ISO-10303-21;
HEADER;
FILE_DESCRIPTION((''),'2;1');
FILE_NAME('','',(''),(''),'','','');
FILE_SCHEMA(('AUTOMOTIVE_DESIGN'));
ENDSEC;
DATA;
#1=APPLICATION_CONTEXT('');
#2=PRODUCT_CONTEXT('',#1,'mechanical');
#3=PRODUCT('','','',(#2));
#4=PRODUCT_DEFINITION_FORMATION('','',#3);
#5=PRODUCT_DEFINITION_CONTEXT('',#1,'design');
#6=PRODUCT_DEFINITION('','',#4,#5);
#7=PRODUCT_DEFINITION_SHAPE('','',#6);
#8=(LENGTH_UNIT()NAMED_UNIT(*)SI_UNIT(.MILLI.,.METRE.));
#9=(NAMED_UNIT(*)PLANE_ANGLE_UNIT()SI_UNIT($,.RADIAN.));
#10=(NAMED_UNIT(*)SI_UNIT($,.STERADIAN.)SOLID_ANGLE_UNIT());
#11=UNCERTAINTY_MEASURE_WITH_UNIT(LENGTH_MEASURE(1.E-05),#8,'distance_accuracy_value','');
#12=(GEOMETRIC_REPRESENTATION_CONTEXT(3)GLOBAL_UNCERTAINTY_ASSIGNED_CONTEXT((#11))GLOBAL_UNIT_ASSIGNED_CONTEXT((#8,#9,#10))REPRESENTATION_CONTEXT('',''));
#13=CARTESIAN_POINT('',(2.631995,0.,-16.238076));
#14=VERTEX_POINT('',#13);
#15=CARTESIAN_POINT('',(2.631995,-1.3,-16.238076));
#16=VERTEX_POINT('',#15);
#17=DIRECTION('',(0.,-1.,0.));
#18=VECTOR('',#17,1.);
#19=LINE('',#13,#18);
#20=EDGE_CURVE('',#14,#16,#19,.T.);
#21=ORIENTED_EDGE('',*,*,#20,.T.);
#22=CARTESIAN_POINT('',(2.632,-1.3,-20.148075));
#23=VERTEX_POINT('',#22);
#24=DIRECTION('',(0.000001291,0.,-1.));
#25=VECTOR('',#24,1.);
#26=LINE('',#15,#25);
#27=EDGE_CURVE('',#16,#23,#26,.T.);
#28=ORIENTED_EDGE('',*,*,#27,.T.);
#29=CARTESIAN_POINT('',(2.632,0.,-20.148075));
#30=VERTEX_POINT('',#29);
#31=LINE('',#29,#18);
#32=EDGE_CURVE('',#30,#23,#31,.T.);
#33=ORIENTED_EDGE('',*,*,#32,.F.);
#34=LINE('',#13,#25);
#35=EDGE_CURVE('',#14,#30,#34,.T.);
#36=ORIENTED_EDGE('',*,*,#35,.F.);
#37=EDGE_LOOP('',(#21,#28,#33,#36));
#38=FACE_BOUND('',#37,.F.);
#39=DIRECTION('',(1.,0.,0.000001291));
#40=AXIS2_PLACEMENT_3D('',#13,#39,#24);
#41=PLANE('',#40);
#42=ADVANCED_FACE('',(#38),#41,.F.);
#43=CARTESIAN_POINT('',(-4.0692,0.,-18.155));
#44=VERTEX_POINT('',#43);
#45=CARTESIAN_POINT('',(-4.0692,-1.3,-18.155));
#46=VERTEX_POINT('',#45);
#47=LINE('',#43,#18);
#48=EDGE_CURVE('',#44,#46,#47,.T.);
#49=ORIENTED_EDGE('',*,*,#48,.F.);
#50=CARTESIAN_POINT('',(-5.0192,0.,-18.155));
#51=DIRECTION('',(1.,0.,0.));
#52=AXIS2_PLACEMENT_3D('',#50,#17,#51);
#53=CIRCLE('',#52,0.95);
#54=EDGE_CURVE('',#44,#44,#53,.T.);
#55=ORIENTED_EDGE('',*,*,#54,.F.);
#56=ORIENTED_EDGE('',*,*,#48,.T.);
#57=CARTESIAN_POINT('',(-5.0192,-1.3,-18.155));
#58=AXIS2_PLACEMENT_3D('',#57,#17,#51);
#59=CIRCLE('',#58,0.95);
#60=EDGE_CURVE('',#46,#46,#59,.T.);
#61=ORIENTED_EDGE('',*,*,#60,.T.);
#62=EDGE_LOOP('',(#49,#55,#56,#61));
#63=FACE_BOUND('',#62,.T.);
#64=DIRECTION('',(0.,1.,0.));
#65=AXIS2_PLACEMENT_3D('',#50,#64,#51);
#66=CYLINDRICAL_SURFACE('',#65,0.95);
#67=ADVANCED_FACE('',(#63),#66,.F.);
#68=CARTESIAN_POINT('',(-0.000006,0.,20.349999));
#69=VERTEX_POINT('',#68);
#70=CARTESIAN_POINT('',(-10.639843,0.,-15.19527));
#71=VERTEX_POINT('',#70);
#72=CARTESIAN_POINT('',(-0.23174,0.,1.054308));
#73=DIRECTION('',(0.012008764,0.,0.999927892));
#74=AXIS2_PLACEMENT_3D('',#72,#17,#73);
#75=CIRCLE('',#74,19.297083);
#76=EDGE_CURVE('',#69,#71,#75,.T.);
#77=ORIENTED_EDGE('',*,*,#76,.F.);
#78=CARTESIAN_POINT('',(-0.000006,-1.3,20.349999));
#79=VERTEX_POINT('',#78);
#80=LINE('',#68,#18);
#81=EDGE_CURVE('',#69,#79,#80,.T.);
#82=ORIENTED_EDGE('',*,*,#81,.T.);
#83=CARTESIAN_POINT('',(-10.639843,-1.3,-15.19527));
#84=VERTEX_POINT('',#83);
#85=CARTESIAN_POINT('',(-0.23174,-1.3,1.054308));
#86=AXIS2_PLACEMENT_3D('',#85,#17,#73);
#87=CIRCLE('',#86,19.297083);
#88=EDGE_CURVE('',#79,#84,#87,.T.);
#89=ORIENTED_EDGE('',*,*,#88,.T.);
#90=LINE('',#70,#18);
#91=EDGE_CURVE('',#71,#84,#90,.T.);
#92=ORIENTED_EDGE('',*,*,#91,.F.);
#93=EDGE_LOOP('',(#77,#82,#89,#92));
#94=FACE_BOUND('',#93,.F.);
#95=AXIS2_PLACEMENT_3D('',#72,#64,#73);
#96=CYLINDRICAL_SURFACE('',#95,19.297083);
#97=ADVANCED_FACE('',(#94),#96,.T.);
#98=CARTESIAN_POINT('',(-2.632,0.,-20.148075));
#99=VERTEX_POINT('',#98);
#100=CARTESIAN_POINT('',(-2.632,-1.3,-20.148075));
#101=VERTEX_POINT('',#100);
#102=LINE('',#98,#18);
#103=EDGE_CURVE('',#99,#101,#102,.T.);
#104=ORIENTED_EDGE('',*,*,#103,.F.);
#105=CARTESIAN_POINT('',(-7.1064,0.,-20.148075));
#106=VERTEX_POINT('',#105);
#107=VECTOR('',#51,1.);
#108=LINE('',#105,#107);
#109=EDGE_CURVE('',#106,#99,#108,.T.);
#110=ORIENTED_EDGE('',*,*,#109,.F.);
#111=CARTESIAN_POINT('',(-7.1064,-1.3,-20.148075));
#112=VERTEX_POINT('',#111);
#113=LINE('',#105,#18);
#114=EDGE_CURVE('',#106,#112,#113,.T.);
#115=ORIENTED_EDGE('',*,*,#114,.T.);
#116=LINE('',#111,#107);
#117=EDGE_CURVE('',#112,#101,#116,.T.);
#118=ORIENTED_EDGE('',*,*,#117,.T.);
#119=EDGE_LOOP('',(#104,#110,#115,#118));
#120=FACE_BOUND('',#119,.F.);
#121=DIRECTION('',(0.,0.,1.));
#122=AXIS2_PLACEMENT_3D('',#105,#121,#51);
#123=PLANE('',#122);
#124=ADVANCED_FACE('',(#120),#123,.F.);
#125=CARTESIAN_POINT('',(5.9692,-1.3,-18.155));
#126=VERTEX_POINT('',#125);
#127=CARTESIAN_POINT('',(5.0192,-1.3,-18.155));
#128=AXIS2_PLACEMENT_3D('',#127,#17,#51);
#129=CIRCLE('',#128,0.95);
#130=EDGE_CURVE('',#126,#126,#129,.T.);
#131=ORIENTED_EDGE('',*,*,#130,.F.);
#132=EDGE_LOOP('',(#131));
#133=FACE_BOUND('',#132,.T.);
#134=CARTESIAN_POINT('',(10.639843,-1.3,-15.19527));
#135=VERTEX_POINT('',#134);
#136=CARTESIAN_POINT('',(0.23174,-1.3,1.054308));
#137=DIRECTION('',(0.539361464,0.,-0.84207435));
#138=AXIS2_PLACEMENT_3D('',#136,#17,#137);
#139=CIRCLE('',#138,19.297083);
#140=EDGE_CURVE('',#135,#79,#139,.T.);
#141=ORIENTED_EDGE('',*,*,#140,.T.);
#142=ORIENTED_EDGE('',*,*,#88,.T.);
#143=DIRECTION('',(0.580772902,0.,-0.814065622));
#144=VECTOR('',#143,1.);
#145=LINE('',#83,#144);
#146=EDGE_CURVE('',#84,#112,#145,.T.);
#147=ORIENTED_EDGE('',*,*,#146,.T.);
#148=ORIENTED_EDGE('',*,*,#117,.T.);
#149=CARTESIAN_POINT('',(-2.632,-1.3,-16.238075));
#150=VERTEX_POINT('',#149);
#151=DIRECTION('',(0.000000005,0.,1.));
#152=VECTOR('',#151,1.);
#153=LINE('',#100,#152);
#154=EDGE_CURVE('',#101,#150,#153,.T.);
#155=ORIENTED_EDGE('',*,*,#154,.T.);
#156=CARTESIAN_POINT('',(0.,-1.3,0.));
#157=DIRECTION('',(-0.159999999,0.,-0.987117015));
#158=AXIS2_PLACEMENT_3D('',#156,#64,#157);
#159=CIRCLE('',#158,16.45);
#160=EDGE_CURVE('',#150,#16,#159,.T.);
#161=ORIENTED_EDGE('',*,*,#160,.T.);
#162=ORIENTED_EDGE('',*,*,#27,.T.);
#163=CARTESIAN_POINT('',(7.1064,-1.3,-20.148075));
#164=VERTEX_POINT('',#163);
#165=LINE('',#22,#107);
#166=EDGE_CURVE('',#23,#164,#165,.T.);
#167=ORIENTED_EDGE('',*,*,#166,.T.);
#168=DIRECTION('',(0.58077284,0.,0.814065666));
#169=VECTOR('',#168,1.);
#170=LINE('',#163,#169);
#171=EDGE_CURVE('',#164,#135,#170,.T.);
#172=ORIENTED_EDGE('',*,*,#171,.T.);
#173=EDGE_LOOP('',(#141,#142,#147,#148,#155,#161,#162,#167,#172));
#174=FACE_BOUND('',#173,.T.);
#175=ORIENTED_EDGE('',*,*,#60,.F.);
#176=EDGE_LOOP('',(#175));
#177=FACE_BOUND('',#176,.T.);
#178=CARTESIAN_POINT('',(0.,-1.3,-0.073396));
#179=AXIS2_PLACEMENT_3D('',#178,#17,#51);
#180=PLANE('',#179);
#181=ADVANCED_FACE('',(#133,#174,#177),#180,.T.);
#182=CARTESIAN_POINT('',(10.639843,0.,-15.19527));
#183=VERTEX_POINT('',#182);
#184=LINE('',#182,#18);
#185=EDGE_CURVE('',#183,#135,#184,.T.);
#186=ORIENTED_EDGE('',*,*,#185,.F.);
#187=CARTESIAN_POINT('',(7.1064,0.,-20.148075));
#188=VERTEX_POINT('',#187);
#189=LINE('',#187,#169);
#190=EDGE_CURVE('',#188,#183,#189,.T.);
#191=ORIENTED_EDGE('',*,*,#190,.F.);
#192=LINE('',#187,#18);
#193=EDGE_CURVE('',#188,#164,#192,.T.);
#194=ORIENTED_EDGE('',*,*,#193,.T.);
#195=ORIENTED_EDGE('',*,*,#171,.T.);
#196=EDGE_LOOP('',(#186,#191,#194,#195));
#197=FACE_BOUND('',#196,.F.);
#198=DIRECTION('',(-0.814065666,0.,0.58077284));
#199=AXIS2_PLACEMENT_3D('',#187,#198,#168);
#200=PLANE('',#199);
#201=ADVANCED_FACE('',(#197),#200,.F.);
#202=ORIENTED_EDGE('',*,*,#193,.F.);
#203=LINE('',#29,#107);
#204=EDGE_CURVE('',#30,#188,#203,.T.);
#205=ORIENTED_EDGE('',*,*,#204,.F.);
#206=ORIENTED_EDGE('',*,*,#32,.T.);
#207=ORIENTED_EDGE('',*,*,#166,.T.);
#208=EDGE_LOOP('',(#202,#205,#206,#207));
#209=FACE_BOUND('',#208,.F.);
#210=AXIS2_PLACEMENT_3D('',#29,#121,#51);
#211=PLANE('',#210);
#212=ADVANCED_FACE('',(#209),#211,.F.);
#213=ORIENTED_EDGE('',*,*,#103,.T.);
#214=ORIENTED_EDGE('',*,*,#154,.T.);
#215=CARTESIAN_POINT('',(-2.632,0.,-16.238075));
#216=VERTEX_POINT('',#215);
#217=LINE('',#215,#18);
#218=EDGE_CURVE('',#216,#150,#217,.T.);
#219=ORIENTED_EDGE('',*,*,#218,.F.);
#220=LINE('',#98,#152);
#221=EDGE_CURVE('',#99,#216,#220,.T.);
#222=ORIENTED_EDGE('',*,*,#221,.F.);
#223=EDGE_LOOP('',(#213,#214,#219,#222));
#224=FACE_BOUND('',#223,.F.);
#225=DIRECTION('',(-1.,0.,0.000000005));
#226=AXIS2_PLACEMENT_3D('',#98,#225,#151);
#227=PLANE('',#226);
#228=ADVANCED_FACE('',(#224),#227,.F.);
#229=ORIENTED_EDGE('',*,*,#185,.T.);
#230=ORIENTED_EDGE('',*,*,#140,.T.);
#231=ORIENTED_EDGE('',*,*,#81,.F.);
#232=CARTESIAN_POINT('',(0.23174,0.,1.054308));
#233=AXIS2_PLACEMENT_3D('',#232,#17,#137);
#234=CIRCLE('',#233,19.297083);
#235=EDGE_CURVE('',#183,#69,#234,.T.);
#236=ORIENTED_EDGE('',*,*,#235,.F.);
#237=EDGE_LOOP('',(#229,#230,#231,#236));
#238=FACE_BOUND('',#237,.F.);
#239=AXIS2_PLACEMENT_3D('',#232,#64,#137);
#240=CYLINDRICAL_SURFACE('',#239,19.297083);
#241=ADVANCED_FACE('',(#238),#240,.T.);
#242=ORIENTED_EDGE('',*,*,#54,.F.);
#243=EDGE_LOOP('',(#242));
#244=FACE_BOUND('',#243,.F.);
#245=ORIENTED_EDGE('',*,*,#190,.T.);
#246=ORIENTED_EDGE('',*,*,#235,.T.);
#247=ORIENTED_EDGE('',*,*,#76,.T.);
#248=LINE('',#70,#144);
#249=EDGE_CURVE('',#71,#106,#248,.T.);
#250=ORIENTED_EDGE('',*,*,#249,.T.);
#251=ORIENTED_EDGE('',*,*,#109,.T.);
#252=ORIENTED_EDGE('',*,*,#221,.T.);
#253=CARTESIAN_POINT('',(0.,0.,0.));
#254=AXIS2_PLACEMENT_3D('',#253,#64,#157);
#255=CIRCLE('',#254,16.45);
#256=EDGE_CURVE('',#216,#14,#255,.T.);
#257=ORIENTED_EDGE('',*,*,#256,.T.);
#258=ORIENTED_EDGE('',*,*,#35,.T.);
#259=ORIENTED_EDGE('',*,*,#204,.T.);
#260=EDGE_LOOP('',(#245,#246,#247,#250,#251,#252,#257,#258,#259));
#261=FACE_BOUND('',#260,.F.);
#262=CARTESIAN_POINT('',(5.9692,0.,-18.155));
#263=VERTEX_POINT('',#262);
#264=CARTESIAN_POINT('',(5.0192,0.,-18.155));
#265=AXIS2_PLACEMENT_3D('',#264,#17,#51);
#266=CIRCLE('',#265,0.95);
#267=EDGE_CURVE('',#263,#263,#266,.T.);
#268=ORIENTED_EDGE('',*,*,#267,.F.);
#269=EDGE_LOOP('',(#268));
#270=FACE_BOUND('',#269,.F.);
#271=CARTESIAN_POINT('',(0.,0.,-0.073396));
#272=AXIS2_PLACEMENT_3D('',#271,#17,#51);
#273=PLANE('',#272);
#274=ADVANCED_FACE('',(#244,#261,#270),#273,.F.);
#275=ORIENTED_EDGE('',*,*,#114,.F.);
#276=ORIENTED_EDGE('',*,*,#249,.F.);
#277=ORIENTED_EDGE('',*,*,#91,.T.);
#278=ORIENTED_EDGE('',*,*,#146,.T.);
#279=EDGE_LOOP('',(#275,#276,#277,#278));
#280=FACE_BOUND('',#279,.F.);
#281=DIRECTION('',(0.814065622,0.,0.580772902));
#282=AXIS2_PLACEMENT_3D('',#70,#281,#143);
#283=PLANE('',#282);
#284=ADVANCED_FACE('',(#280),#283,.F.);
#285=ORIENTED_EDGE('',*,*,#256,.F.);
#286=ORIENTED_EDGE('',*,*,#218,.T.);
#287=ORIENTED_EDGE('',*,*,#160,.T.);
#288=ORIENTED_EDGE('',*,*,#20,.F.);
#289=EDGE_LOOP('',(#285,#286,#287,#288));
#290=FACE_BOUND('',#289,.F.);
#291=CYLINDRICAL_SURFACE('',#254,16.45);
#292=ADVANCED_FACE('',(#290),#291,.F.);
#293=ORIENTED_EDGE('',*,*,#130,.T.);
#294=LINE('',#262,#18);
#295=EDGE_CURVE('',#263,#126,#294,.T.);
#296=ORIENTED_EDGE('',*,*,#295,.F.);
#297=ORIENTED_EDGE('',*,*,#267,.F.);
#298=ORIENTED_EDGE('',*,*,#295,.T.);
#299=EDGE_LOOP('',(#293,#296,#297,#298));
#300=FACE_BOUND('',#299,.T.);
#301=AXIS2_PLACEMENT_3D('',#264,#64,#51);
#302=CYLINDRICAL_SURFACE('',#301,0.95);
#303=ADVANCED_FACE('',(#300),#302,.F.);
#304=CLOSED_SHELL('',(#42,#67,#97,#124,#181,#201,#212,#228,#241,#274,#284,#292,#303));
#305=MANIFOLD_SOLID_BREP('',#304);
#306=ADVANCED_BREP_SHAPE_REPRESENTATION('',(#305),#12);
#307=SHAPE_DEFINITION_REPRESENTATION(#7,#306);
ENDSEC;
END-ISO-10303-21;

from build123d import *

# Parameters (mm, degrees)
F0_R     = 0.95
F1_DEPTH = 1.3


# Not quite as in the source:
# - ends of sketch curves that miss each other by under 0.0002 mm in the source are joined


with BuildPart() as f1:
    # F0 (on Front) → F1 (new body)
    with BuildSketch(Plane.XZ):
        with BuildLine():
            ThreePointArc((-2.631999982, -16.2380748888), (2.5478e-06, 16.45), (2.631994952, -16.2380757041))
            Line((2.631994952, -16.2380757041), (2.632, -20.148075))
            Line((2.632, -20.148075), (7.1064, -20.148075))
            Line((7.1064, -20.148075), (10.639843, -15.19527))
            ThreePointArc((10.639843, -15.19527), (18.7183878017, 6.5879564678), (-5.9926e-06, 20.349999387))
            ThreePointArc((-5.9926e-06, 20.349999387), (-18.7183877489, 6.5879566442), (-10.6398432665, -15.1952704161))
            Line((-10.6398432665, -15.1952704161), (-7.1064, -20.148075))
            Line((-7.1064, -20.148075), (-2.632, -20.148075))
            Line((-2.632, -20.148075), (-2.631999982, -16.2380748888))
        make_face()
        with Locations((-5.0192, -18.155)):
            Circle(F0_R, mode=Mode.SUBTRACT)
        with Locations((5.0192, -18.155)):
            Circle(F0_R, mode=Mode.SUBTRACT)
    extrude(amount=F1_DEPTH)


solid = f1.part
